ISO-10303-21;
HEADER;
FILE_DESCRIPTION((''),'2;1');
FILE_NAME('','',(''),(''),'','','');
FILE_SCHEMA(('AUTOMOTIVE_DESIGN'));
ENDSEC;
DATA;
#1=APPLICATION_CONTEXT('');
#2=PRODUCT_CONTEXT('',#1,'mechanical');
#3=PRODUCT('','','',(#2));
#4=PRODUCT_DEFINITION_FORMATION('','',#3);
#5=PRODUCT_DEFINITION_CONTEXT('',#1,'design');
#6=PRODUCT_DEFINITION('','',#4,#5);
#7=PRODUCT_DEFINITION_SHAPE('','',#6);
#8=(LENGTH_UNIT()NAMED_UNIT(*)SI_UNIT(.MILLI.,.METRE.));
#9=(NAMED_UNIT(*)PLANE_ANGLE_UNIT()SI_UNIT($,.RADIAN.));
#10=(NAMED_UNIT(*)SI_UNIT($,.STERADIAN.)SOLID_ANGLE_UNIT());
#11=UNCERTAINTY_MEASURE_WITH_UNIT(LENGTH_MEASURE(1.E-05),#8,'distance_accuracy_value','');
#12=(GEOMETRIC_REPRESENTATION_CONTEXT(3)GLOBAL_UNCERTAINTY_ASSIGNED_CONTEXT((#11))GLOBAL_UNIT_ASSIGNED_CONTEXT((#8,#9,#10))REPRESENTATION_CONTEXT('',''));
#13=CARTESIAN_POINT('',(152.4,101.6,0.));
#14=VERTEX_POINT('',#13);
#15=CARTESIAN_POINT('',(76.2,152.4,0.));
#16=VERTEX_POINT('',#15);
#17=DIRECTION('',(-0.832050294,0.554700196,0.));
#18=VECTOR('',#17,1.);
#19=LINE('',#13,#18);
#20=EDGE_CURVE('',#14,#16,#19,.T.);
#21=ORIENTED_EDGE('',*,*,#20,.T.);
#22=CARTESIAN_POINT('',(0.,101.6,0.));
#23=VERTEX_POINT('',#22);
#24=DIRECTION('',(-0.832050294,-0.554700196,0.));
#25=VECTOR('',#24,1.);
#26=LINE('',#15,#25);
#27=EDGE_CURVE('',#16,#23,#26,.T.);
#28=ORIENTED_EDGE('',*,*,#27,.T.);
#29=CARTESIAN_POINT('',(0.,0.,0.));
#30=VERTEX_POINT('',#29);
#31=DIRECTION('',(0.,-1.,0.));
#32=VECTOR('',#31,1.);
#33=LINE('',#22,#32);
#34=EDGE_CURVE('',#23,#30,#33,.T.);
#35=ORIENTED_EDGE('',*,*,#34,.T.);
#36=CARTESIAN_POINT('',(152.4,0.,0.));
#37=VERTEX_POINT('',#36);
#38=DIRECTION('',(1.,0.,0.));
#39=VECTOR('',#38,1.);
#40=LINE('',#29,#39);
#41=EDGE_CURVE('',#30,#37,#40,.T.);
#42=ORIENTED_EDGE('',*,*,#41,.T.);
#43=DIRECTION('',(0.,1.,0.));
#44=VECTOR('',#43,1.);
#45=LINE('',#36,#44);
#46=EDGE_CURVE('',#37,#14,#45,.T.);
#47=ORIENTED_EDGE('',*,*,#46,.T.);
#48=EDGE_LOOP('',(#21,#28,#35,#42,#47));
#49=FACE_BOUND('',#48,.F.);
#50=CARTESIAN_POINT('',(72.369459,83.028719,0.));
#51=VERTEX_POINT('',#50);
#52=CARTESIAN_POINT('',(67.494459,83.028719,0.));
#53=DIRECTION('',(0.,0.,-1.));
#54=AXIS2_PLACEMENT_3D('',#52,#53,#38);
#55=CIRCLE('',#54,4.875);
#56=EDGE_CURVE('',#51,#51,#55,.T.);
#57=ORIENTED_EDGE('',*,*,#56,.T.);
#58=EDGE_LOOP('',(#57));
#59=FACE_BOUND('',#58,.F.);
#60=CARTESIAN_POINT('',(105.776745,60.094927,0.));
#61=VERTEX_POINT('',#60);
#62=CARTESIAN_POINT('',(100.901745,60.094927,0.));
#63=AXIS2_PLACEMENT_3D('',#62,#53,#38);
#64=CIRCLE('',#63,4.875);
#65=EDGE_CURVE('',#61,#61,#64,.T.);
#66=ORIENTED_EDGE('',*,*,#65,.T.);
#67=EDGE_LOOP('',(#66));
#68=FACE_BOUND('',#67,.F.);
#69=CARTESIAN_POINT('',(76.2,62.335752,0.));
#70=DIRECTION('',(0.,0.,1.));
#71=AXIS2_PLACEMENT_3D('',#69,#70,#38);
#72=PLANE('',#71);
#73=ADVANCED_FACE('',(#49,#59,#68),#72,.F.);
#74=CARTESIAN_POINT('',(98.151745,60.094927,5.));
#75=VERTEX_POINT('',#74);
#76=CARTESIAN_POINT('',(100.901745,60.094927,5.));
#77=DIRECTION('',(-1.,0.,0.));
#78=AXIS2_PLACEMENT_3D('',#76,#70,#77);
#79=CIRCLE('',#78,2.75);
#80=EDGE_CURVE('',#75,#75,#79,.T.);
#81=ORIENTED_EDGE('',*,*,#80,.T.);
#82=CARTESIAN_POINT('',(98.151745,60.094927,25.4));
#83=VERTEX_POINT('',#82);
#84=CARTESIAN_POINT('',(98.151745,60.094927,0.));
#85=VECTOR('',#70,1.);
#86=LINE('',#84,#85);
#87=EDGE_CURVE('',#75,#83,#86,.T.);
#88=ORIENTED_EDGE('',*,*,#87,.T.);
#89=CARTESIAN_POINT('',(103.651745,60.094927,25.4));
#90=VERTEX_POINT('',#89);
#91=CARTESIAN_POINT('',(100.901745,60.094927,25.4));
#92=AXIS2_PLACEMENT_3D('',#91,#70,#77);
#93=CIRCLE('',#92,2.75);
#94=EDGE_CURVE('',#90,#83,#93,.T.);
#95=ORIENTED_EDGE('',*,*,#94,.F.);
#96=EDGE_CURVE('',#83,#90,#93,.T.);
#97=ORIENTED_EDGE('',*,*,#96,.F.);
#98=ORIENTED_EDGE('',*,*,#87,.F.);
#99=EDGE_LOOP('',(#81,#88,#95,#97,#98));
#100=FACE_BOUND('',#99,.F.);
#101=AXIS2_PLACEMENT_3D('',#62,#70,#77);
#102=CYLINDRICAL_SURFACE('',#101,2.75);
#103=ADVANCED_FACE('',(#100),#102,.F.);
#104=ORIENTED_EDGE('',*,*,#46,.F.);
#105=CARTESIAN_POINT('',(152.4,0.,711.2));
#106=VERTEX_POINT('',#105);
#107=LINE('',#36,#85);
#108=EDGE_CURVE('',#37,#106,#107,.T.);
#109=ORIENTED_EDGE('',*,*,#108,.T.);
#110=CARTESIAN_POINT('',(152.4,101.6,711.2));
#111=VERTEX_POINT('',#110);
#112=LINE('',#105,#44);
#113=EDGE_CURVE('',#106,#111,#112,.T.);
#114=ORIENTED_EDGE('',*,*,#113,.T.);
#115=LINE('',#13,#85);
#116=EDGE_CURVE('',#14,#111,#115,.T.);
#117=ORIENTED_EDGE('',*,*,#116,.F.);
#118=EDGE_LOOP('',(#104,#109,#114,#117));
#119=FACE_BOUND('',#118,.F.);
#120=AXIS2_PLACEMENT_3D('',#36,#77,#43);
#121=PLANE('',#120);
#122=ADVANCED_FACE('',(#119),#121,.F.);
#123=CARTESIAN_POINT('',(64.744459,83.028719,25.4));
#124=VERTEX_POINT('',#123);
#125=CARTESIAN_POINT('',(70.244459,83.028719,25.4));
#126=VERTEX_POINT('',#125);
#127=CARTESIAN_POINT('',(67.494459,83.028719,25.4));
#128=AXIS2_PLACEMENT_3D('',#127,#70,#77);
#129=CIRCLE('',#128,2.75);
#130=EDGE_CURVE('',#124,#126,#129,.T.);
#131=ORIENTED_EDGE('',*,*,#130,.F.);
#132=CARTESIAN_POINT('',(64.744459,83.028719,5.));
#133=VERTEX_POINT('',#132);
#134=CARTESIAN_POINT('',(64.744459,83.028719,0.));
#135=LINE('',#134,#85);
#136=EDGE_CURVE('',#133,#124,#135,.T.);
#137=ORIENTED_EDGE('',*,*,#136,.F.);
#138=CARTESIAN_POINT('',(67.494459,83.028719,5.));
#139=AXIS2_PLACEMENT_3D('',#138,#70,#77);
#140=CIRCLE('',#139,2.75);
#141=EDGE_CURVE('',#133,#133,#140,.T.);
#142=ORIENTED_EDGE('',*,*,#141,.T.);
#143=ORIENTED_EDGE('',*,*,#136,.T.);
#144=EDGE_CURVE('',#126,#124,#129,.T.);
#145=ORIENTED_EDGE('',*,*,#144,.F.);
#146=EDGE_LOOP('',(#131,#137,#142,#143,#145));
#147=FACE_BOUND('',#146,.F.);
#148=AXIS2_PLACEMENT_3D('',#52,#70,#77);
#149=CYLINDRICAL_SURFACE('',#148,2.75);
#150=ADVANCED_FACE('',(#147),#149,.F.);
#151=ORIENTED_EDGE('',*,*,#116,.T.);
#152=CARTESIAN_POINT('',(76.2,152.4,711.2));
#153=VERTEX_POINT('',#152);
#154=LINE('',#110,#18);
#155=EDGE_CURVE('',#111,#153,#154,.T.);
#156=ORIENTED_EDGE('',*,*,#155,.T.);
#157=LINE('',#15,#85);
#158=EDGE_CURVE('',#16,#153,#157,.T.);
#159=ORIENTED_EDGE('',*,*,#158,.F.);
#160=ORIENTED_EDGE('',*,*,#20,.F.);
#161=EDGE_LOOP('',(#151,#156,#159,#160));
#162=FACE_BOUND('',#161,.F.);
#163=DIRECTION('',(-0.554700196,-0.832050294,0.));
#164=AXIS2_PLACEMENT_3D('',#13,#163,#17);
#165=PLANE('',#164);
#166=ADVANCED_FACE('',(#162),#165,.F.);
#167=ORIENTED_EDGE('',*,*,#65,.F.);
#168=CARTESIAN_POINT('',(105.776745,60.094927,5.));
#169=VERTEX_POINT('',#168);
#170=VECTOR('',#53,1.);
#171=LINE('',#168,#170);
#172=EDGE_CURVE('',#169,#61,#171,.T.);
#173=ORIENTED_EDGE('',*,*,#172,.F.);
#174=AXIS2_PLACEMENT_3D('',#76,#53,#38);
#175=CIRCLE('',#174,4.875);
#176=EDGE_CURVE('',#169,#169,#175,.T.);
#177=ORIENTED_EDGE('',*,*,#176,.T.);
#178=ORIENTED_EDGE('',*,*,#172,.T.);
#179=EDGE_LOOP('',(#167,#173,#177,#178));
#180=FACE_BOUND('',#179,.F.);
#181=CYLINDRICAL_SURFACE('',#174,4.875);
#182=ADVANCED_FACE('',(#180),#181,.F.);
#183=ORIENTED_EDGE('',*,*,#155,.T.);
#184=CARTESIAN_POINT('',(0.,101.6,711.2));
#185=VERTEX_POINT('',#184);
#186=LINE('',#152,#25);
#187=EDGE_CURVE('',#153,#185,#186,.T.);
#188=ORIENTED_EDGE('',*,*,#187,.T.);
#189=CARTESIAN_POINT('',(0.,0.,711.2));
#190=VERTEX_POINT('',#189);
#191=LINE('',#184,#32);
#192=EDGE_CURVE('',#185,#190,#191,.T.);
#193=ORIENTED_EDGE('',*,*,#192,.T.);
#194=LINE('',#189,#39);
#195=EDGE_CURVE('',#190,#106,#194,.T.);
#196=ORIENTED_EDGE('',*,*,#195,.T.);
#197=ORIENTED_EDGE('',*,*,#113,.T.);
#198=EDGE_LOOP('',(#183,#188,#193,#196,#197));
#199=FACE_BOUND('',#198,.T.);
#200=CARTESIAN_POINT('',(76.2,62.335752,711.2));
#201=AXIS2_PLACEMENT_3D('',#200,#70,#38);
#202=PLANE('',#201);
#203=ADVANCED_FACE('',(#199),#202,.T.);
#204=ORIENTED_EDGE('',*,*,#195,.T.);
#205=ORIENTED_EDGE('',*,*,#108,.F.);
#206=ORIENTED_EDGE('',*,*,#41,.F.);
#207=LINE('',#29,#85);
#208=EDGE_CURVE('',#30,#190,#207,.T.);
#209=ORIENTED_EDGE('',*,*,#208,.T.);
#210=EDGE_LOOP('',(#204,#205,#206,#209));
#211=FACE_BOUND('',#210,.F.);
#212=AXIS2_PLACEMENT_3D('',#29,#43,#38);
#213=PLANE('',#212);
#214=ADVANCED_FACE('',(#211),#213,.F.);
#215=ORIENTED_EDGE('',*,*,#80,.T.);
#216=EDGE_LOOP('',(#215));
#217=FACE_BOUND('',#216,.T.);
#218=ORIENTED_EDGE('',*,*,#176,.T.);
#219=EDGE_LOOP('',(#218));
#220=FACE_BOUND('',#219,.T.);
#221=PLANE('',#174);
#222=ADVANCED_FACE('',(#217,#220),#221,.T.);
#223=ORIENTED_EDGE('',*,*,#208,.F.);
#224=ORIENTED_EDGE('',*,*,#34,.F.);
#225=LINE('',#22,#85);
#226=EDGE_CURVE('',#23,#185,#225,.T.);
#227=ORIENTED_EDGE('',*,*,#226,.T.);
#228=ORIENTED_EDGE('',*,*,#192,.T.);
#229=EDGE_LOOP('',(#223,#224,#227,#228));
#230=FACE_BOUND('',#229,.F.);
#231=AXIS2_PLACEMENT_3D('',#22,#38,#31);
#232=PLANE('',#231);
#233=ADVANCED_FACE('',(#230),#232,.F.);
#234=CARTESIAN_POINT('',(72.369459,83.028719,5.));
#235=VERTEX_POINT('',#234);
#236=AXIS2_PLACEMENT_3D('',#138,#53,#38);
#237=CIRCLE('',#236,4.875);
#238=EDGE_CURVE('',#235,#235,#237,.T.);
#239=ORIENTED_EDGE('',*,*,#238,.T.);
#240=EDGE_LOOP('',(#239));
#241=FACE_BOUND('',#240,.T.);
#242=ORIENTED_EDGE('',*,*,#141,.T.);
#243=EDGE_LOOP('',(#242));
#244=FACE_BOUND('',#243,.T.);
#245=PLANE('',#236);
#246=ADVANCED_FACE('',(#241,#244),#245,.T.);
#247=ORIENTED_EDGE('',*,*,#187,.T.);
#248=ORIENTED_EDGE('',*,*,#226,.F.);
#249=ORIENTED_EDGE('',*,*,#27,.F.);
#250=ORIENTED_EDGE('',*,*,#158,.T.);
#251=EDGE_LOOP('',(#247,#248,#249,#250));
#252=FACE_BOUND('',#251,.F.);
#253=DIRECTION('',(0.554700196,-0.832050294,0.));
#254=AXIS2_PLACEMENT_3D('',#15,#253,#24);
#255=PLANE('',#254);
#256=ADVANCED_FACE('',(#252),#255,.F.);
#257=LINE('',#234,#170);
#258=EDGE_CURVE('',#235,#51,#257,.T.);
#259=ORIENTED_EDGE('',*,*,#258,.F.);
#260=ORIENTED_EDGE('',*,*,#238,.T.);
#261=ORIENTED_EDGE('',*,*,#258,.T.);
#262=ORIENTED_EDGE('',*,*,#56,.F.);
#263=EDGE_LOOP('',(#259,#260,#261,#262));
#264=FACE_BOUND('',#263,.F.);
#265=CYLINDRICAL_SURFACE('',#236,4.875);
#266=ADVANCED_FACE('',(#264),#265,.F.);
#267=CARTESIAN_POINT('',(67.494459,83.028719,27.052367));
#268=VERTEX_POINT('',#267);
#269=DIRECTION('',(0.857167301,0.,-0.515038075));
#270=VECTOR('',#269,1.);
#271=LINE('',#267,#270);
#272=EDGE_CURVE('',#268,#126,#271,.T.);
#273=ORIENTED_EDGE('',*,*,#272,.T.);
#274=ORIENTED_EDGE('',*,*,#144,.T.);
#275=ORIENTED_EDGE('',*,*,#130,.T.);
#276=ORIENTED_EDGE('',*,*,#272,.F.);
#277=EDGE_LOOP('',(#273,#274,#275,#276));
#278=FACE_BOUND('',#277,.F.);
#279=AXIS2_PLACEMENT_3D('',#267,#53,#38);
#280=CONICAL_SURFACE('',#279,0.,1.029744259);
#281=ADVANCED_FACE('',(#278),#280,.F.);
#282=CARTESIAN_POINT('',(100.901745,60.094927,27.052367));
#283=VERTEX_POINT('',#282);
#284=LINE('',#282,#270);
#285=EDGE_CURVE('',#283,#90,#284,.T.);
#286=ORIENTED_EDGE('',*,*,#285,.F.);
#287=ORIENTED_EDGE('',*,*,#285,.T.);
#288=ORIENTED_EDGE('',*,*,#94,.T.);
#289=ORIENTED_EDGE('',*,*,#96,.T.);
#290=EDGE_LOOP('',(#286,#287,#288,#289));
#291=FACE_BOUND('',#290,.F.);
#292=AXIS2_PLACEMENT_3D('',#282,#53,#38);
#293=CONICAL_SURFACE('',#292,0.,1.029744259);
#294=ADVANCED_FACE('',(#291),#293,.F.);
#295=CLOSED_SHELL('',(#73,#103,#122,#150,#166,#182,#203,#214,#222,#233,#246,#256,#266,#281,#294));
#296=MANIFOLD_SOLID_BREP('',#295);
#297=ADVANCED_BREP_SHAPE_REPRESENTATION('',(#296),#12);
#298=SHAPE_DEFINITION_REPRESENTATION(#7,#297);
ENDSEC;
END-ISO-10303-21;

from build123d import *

# Parameters (mm, degrees)
F1_DEPTH       = 711.2
F3_D           = 5.5
F3_DEPTH       = 25.4
F3_CBORE_D     = 9.75
F3_CBORE_DEPTH = 5
F3_TIP         = 1.6523667023


# Not quite as in the source:
# - a feature names something its author has since deleted; it is built from what else it names


with BuildPart() as f1:
    # F0 (on Top) → F1 (new body)
    with BuildSketch(Plane.XY):
        Polygon((0, 101.6), (0, 0), (152.4, 0), (152.4, 101.6), (76.2, 152.4), align=None)
    extrude(amount=F1_DEPTH)

    # F3
    with Locations(Plane(origin=(0, 0, 0), x_dir=(1, 0, 0), z_dir=(0, 0, -1))):
        with Locations((100.9017452598, -60.0949265063), (67.4944594502, -83.0287188292)):
            CounterBoreHole(F3_D / 2, F3_CBORE_D / 2, F3_CBORE_DEPTH, depth=F3_DEPTH)
            with Locations((0, 0, -(F3_DEPTH + F3_TIP / 2))):  # 118° drill point
                Cone(0, F3_D / 2, F3_TIP, mode=Mode.SUBTRACT)


solid = f1.part
